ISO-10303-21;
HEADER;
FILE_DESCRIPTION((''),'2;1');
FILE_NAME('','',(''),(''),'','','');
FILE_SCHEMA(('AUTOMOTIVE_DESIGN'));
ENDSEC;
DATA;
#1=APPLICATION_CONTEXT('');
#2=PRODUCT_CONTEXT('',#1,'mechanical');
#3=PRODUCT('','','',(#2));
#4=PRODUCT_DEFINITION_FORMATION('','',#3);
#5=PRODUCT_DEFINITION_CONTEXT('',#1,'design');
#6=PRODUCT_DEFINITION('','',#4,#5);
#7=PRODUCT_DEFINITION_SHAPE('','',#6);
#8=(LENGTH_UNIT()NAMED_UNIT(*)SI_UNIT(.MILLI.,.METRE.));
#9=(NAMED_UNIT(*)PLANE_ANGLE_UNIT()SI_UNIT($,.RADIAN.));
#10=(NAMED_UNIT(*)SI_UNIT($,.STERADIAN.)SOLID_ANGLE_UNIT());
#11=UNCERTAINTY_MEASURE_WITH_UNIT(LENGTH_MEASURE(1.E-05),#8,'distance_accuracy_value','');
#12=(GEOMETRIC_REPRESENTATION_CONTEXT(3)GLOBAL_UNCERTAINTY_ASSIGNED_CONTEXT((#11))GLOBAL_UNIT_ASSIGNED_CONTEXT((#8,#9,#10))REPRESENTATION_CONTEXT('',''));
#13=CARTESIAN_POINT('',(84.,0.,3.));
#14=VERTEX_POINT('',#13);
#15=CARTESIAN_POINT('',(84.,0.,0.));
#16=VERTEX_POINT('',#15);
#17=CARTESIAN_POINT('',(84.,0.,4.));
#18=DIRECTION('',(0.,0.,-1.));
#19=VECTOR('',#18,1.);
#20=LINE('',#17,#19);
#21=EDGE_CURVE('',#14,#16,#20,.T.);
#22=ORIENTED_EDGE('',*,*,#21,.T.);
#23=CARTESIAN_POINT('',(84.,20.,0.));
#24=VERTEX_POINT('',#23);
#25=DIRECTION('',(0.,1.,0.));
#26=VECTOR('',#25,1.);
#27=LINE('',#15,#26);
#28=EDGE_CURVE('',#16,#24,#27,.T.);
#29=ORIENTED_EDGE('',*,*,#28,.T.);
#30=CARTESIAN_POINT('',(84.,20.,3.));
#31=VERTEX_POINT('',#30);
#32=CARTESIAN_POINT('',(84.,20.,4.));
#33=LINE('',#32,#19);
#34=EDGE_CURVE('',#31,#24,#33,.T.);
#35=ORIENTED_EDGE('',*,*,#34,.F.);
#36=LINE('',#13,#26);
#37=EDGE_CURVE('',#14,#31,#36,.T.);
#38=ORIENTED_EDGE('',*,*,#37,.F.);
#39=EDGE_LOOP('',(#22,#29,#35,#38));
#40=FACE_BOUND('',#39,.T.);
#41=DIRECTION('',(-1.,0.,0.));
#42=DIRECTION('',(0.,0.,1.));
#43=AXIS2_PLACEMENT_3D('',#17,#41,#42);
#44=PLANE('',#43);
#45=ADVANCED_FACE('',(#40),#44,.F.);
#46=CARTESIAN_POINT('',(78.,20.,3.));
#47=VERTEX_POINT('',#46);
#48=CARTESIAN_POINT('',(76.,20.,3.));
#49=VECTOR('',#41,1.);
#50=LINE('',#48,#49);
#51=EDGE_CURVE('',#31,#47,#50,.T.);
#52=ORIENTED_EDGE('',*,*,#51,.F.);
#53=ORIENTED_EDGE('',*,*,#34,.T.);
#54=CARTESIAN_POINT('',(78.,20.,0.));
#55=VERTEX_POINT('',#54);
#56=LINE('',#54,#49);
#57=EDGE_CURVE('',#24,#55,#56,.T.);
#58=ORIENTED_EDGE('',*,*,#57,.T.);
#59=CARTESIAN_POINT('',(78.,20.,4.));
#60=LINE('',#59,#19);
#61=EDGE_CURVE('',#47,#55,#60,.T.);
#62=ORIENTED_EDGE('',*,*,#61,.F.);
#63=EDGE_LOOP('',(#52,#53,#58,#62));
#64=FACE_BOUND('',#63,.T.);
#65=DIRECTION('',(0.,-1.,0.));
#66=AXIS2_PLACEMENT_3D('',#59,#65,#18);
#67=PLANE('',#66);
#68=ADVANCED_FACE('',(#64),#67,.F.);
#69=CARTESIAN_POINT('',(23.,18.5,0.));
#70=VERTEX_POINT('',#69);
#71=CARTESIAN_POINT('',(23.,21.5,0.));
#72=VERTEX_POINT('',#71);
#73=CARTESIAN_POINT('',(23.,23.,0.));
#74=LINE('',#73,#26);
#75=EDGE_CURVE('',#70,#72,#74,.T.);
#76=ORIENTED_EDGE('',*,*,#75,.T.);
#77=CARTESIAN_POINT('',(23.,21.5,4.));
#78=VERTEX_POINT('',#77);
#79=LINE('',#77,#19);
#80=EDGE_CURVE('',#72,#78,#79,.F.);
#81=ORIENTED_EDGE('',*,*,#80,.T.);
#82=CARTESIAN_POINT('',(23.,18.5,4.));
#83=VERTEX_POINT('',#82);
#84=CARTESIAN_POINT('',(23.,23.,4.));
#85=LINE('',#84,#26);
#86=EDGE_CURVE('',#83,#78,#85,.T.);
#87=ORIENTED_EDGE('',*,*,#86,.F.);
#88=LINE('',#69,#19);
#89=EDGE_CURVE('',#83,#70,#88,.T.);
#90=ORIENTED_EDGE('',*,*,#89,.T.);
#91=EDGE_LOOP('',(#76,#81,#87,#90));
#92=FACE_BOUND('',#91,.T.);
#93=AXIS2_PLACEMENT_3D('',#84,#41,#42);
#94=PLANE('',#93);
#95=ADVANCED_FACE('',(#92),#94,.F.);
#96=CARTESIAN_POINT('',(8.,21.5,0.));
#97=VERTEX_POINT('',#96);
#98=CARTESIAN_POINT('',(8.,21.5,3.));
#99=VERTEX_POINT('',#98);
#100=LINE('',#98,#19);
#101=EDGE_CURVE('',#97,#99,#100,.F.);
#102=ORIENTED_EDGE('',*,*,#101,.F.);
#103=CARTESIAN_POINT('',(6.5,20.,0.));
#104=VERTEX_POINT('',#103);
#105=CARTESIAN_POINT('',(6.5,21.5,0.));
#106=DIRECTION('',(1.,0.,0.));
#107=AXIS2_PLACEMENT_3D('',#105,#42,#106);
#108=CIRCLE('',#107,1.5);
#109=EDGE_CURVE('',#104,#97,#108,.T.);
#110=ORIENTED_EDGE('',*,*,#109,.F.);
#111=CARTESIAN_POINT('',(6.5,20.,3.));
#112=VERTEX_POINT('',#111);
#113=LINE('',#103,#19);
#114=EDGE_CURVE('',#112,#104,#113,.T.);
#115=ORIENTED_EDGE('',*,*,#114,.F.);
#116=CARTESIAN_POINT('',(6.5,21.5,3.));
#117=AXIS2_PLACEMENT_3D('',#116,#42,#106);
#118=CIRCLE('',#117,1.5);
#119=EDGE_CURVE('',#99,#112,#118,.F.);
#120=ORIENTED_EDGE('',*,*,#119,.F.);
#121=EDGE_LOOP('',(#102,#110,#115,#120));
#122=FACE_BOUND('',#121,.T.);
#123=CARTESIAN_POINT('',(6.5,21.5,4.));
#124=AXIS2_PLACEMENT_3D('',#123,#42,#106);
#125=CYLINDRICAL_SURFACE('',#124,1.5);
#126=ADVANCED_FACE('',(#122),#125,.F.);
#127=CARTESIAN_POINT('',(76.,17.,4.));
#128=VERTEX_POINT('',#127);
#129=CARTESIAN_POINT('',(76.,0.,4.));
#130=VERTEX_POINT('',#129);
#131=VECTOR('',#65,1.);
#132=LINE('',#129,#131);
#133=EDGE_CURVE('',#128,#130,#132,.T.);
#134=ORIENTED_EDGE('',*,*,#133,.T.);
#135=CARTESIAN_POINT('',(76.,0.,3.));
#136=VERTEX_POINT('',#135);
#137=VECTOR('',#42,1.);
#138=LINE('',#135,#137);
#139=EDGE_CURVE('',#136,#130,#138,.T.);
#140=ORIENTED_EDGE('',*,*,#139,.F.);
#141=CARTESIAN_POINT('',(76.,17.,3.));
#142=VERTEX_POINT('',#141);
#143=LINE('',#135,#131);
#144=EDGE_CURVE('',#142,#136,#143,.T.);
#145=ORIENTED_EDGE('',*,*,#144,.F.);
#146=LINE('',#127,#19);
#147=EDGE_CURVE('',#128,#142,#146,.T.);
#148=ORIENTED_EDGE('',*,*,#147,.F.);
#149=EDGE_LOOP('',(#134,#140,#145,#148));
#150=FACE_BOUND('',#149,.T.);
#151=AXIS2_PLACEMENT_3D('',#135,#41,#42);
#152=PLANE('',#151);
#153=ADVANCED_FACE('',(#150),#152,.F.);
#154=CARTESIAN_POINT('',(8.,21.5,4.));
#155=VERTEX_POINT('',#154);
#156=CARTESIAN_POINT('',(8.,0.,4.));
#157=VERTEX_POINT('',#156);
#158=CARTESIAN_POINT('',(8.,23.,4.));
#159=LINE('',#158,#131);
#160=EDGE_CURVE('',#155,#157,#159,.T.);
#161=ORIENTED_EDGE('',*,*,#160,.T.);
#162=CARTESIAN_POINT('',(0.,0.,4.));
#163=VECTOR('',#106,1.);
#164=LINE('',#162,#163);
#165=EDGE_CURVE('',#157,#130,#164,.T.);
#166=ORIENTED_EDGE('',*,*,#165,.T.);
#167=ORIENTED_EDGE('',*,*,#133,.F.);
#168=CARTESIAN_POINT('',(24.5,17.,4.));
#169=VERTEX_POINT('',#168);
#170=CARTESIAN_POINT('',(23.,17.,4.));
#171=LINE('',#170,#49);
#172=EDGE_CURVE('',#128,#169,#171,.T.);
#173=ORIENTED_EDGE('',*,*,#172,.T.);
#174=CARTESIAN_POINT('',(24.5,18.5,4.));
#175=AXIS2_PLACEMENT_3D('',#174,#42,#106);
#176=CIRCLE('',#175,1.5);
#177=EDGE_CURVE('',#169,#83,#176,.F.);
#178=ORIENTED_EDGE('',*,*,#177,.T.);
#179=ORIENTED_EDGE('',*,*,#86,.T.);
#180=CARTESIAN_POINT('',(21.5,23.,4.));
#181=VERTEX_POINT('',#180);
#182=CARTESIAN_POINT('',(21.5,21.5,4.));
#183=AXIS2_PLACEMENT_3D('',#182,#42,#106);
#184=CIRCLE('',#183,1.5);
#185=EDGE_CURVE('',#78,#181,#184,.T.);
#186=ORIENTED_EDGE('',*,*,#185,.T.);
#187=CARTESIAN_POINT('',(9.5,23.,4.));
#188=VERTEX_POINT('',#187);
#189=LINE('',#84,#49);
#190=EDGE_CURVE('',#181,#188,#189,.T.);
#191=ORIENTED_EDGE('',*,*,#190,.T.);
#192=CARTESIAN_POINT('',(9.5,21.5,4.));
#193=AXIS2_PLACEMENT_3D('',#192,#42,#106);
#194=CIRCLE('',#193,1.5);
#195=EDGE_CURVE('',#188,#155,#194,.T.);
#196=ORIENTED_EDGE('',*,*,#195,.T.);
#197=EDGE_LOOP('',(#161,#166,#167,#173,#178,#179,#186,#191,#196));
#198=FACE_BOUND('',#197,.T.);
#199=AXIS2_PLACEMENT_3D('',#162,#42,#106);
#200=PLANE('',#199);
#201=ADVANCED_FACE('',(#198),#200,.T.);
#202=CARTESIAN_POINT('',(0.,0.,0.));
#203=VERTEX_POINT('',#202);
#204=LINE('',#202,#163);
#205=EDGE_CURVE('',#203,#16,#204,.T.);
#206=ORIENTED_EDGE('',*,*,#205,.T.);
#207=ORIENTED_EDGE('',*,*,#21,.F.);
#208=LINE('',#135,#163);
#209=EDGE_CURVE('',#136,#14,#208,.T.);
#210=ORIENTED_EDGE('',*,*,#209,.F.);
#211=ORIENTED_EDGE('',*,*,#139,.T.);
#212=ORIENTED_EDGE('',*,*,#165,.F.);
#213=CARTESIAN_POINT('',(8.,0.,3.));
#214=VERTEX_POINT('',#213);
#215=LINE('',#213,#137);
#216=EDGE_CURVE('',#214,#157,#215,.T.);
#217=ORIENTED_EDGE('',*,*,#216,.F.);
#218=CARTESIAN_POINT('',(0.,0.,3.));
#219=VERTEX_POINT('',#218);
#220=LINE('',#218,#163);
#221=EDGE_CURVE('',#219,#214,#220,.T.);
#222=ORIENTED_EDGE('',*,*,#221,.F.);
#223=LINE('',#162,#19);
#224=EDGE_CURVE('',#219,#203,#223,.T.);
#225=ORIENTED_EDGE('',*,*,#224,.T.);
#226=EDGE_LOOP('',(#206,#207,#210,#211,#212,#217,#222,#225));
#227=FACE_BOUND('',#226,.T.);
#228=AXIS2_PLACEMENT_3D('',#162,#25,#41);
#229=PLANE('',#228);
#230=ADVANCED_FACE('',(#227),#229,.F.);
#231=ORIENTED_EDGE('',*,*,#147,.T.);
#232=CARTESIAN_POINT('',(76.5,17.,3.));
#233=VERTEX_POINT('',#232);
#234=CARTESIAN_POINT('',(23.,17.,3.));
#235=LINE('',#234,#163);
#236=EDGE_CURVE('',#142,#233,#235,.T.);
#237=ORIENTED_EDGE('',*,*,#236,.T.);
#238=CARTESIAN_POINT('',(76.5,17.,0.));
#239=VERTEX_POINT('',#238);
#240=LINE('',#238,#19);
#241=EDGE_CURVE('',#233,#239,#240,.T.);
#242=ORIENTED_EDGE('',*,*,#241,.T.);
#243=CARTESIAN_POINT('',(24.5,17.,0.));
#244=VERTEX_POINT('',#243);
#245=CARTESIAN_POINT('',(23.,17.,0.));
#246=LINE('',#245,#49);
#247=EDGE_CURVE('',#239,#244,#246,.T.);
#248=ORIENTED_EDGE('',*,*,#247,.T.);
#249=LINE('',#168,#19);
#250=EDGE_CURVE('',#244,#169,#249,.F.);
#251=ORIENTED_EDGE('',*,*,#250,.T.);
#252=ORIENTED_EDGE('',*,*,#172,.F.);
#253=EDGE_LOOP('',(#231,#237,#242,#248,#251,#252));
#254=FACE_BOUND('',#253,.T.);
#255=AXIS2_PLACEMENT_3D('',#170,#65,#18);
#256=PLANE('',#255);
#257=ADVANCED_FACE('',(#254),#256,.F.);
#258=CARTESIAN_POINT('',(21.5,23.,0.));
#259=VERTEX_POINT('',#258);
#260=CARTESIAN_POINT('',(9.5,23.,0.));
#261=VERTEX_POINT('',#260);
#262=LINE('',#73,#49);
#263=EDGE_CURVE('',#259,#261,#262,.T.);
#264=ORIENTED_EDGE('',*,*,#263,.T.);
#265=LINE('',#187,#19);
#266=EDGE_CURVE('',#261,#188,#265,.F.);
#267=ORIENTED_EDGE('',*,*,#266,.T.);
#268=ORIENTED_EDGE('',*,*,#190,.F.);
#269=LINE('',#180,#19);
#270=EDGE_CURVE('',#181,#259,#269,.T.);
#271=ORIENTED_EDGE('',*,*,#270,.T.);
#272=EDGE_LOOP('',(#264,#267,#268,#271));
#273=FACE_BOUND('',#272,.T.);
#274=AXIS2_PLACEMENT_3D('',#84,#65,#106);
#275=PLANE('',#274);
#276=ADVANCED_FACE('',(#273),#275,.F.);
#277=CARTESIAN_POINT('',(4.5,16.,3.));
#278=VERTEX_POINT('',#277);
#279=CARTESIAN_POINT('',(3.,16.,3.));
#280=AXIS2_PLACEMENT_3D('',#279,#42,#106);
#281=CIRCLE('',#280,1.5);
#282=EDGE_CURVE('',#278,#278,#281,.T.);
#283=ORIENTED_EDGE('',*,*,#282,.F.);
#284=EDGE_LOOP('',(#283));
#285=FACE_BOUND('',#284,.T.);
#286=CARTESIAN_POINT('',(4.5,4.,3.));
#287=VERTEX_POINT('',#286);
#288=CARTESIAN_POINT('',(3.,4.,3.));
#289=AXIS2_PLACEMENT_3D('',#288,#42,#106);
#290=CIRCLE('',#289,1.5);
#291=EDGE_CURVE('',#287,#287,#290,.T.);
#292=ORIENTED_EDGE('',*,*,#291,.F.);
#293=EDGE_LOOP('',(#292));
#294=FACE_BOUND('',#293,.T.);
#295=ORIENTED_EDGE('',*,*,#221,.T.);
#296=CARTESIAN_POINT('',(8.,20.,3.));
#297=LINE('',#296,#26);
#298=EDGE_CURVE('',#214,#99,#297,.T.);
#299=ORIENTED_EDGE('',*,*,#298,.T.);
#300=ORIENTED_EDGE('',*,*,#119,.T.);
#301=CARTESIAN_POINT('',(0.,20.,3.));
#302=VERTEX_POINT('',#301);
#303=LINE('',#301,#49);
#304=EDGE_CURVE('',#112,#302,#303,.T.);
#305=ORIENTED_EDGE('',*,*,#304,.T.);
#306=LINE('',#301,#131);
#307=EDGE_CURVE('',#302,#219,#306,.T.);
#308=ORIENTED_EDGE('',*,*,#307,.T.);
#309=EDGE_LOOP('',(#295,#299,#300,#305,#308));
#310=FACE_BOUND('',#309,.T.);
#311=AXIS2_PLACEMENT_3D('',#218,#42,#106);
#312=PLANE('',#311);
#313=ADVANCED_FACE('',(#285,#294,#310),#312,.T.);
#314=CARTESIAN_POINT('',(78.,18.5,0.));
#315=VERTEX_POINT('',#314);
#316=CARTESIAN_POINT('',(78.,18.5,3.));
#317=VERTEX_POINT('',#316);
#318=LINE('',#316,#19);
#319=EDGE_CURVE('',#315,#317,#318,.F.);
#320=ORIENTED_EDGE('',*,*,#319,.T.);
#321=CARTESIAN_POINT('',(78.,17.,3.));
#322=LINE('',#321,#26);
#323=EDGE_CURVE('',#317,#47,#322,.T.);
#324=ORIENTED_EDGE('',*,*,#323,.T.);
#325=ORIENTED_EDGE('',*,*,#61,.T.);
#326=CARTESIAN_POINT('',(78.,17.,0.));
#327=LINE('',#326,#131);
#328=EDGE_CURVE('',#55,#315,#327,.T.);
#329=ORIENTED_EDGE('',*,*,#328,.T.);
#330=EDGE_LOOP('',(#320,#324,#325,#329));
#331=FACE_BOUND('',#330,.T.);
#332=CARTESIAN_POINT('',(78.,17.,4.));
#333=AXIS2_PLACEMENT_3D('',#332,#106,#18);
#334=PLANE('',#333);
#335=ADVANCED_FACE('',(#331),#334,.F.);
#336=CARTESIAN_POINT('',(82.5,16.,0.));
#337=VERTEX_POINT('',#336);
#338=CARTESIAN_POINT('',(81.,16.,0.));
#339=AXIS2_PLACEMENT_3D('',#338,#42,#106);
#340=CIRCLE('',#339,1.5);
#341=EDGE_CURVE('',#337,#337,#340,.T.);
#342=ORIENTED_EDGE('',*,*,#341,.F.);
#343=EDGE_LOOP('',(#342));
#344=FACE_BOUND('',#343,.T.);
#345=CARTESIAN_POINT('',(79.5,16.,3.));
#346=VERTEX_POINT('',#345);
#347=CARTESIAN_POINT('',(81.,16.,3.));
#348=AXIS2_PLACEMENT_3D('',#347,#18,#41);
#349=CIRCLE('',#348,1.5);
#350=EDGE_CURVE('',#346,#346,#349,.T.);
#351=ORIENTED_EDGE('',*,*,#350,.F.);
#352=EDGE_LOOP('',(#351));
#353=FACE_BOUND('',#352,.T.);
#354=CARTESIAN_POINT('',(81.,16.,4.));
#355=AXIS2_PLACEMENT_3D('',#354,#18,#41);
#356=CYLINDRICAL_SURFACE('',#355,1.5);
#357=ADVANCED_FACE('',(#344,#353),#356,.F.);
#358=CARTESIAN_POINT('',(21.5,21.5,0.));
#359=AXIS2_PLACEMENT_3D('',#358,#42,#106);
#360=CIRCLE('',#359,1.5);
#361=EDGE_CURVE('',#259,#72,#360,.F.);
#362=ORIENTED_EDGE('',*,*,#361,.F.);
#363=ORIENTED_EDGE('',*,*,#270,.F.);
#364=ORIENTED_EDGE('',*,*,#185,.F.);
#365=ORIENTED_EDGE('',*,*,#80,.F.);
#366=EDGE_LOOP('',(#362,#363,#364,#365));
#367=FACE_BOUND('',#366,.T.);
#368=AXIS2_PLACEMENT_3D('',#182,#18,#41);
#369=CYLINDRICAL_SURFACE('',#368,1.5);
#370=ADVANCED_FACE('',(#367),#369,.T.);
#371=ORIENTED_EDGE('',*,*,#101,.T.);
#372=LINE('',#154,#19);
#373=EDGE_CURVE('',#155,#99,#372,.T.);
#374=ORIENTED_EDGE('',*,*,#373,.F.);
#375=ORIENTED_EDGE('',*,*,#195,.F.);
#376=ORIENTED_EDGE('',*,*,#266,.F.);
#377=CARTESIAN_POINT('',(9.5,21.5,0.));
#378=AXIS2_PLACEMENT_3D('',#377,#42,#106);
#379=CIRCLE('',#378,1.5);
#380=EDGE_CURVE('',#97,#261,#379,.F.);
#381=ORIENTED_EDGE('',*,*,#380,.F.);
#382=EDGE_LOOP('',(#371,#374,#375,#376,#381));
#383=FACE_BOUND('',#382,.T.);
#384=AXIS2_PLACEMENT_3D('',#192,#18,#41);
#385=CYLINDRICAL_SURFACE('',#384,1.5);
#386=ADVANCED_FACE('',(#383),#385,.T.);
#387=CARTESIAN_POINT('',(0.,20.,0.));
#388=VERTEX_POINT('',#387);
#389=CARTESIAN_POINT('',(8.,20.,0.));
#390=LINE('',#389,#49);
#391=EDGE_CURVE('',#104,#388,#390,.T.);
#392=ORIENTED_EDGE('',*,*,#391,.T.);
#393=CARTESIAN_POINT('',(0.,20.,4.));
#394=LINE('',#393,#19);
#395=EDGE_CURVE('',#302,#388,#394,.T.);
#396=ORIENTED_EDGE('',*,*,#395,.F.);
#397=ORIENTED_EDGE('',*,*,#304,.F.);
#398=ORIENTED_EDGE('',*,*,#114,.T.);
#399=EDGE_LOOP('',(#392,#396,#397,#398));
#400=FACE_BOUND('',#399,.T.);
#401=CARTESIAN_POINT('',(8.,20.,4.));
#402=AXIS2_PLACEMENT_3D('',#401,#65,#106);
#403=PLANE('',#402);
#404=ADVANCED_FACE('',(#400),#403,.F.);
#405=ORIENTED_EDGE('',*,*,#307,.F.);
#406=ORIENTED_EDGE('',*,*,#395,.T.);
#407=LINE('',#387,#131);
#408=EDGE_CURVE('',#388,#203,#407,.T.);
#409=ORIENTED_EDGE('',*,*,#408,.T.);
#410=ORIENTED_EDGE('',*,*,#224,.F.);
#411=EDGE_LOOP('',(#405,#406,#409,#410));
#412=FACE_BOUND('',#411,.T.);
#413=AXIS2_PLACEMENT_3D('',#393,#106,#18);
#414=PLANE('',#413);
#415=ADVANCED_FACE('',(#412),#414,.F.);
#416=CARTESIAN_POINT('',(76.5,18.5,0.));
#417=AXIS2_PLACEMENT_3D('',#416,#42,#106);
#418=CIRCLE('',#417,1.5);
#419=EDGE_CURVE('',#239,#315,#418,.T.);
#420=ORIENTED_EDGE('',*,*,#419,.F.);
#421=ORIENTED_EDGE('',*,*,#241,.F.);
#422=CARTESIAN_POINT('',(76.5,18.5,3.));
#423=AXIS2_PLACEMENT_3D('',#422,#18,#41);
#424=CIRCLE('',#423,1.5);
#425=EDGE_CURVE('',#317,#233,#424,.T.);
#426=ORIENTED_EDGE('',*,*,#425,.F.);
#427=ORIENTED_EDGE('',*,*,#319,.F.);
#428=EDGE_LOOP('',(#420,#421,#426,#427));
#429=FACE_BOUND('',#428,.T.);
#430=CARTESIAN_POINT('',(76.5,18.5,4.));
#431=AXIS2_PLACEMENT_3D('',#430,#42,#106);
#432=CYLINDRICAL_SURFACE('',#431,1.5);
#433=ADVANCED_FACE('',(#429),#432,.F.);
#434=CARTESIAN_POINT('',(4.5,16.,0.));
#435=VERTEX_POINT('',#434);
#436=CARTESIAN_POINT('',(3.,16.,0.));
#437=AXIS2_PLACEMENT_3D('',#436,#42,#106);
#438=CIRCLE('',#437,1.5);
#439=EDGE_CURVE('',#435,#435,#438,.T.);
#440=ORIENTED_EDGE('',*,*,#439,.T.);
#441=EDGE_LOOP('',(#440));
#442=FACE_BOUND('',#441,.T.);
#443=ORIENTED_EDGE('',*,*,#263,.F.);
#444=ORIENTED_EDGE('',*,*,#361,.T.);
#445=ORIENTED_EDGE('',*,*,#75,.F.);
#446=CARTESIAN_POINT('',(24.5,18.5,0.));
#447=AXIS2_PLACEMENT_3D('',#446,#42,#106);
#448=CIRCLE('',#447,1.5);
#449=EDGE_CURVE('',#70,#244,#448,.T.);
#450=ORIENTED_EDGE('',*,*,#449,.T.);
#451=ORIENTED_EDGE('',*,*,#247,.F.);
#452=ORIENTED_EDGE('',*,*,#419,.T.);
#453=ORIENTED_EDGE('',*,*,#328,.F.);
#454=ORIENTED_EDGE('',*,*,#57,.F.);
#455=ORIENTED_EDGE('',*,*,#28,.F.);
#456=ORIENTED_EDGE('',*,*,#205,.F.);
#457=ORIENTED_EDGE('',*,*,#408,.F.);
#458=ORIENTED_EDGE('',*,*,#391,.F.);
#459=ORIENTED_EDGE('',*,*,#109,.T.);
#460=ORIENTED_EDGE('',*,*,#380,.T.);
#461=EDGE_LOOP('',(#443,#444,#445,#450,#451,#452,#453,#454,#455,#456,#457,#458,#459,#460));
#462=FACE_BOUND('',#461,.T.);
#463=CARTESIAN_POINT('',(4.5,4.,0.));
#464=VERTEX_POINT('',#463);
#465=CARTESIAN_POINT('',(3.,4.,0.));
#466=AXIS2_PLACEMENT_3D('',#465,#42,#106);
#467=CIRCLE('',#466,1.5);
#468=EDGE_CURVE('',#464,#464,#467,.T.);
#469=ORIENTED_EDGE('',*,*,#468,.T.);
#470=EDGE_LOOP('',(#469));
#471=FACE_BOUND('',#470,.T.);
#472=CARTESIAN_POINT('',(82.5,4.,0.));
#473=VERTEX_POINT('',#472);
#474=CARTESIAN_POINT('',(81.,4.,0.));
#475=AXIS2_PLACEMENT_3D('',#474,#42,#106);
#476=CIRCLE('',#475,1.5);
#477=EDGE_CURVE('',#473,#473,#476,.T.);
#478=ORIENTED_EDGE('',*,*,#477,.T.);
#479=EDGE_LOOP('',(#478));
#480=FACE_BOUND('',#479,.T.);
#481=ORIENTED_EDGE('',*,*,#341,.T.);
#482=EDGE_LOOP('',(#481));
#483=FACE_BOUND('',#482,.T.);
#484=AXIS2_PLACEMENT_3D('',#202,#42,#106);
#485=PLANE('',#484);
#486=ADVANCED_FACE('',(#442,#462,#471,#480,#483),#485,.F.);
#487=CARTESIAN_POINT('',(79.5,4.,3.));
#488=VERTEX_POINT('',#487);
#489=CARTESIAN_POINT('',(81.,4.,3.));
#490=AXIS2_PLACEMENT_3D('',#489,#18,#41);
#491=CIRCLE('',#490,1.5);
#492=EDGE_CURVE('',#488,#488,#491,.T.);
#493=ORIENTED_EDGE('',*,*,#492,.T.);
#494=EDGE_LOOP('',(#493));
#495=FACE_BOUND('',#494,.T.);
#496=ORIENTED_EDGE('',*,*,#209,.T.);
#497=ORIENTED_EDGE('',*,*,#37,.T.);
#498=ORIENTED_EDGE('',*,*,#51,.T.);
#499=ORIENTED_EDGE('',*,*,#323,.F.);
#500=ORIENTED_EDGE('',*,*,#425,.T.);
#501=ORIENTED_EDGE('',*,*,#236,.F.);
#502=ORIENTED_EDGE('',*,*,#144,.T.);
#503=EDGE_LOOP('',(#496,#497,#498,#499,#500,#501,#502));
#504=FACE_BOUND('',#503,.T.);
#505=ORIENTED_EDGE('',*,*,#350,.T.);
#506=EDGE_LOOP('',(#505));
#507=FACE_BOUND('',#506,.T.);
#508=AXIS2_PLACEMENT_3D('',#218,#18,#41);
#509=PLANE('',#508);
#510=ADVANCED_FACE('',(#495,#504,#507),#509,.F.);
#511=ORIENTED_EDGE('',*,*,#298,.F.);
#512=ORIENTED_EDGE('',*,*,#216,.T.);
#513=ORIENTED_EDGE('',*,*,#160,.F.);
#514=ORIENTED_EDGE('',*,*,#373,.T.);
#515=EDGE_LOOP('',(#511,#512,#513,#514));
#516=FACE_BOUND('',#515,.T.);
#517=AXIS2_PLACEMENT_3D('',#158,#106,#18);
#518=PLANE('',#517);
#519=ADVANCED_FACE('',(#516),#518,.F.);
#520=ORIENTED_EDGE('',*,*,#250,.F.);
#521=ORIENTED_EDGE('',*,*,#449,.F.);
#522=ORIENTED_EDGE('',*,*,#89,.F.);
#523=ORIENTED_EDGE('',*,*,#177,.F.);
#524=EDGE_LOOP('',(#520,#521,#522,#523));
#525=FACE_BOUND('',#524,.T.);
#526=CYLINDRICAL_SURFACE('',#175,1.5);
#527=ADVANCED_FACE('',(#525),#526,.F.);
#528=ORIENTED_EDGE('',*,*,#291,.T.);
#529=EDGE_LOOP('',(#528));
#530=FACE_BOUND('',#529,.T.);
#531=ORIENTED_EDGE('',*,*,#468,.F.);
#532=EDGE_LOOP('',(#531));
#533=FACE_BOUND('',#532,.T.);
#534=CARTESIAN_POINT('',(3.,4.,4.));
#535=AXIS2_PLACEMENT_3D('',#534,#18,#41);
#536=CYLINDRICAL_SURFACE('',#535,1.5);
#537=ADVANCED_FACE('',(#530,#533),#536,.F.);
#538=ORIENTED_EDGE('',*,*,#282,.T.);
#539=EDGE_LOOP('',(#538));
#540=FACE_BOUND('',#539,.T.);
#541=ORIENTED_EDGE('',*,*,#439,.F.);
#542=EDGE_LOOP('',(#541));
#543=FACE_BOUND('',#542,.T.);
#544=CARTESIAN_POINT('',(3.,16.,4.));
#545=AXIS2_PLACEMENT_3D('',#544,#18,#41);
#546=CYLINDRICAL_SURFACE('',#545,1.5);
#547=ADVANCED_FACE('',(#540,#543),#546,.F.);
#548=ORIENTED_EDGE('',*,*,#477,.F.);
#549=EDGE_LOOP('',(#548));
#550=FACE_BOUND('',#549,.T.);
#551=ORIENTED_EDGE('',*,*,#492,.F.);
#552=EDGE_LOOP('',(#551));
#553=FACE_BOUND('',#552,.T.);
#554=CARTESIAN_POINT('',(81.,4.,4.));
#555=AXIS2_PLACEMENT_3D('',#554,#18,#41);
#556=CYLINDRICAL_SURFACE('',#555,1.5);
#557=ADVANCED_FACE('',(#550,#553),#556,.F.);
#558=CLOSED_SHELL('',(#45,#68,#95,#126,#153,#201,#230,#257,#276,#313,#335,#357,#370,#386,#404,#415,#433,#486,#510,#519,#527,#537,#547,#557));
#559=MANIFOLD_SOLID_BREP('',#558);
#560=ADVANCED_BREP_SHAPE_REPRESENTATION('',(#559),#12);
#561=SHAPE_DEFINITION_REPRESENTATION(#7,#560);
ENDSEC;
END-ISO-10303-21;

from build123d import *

# Parameters (mm, degrees)
SKETCH1_R           = 1.5
BOSS_EXTRUDE1_DEPTH = 4
SKETCH2_W           = 8
SKETCH2_H           = 20
CUT_EXTRUDE1_DEPTH  = 1
FILLET1_R           = 1.5


with BuildPart() as part:
    # Sketch1 → Boss-Extrude1 (new body)
    with BuildSketch(Plane.XY):
        Polygon((23, 23), (23, 17), (78, 17), (78, 20), (84, 20), (84, 0), (0, 0), (0, 20), (8, 20), (8, 23), align=None)
        with Locations((3, 16)):
            Circle(SKETCH1_R, mode=Mode.SUBTRACT)
        with Locations((81, 16)):
            Circle(SKETCH1_R, mode=Mode.SUBTRACT)
        with Locations((3, 4)):
            Circle(SKETCH1_R, mode=Mode.SUBTRACT)
        with Locations((81, 4)):
            Circle(SKETCH1_R, mode=Mode.SUBTRACT)
    extrude(amount=BOSS_EXTRUDE1_DEPTH)

    # Sketch2 → Cut-Extrude1 (cut)
    with BuildSketch(Plane.XY.offset(4)):
        with Locations((4, 10)):
            Rectangle(SKETCH2_W, SKETCH2_H)
        with Locations((80, 10)):
            Rectangle(SKETCH2_W, SKETCH2_H)
    extrude(amount=-CUT_EXTRUDE1_DEPTH, mode=Mode.SUBTRACT)

    # Fillet1
    fillet1_edges = [part.edges().sort_by_distance(p)[0] for p in [
        (78, 17, 1.5),
        (23, 17, 2),
        (23, 23, 2),
        (8, 23, 2),
        (8, 20, 1.5),
    ]]
    fillet(fillet1_edges, radius=FILLET1_R - 0.0001)  # a hair under: the kernel refuses the full size


solid = part.part
